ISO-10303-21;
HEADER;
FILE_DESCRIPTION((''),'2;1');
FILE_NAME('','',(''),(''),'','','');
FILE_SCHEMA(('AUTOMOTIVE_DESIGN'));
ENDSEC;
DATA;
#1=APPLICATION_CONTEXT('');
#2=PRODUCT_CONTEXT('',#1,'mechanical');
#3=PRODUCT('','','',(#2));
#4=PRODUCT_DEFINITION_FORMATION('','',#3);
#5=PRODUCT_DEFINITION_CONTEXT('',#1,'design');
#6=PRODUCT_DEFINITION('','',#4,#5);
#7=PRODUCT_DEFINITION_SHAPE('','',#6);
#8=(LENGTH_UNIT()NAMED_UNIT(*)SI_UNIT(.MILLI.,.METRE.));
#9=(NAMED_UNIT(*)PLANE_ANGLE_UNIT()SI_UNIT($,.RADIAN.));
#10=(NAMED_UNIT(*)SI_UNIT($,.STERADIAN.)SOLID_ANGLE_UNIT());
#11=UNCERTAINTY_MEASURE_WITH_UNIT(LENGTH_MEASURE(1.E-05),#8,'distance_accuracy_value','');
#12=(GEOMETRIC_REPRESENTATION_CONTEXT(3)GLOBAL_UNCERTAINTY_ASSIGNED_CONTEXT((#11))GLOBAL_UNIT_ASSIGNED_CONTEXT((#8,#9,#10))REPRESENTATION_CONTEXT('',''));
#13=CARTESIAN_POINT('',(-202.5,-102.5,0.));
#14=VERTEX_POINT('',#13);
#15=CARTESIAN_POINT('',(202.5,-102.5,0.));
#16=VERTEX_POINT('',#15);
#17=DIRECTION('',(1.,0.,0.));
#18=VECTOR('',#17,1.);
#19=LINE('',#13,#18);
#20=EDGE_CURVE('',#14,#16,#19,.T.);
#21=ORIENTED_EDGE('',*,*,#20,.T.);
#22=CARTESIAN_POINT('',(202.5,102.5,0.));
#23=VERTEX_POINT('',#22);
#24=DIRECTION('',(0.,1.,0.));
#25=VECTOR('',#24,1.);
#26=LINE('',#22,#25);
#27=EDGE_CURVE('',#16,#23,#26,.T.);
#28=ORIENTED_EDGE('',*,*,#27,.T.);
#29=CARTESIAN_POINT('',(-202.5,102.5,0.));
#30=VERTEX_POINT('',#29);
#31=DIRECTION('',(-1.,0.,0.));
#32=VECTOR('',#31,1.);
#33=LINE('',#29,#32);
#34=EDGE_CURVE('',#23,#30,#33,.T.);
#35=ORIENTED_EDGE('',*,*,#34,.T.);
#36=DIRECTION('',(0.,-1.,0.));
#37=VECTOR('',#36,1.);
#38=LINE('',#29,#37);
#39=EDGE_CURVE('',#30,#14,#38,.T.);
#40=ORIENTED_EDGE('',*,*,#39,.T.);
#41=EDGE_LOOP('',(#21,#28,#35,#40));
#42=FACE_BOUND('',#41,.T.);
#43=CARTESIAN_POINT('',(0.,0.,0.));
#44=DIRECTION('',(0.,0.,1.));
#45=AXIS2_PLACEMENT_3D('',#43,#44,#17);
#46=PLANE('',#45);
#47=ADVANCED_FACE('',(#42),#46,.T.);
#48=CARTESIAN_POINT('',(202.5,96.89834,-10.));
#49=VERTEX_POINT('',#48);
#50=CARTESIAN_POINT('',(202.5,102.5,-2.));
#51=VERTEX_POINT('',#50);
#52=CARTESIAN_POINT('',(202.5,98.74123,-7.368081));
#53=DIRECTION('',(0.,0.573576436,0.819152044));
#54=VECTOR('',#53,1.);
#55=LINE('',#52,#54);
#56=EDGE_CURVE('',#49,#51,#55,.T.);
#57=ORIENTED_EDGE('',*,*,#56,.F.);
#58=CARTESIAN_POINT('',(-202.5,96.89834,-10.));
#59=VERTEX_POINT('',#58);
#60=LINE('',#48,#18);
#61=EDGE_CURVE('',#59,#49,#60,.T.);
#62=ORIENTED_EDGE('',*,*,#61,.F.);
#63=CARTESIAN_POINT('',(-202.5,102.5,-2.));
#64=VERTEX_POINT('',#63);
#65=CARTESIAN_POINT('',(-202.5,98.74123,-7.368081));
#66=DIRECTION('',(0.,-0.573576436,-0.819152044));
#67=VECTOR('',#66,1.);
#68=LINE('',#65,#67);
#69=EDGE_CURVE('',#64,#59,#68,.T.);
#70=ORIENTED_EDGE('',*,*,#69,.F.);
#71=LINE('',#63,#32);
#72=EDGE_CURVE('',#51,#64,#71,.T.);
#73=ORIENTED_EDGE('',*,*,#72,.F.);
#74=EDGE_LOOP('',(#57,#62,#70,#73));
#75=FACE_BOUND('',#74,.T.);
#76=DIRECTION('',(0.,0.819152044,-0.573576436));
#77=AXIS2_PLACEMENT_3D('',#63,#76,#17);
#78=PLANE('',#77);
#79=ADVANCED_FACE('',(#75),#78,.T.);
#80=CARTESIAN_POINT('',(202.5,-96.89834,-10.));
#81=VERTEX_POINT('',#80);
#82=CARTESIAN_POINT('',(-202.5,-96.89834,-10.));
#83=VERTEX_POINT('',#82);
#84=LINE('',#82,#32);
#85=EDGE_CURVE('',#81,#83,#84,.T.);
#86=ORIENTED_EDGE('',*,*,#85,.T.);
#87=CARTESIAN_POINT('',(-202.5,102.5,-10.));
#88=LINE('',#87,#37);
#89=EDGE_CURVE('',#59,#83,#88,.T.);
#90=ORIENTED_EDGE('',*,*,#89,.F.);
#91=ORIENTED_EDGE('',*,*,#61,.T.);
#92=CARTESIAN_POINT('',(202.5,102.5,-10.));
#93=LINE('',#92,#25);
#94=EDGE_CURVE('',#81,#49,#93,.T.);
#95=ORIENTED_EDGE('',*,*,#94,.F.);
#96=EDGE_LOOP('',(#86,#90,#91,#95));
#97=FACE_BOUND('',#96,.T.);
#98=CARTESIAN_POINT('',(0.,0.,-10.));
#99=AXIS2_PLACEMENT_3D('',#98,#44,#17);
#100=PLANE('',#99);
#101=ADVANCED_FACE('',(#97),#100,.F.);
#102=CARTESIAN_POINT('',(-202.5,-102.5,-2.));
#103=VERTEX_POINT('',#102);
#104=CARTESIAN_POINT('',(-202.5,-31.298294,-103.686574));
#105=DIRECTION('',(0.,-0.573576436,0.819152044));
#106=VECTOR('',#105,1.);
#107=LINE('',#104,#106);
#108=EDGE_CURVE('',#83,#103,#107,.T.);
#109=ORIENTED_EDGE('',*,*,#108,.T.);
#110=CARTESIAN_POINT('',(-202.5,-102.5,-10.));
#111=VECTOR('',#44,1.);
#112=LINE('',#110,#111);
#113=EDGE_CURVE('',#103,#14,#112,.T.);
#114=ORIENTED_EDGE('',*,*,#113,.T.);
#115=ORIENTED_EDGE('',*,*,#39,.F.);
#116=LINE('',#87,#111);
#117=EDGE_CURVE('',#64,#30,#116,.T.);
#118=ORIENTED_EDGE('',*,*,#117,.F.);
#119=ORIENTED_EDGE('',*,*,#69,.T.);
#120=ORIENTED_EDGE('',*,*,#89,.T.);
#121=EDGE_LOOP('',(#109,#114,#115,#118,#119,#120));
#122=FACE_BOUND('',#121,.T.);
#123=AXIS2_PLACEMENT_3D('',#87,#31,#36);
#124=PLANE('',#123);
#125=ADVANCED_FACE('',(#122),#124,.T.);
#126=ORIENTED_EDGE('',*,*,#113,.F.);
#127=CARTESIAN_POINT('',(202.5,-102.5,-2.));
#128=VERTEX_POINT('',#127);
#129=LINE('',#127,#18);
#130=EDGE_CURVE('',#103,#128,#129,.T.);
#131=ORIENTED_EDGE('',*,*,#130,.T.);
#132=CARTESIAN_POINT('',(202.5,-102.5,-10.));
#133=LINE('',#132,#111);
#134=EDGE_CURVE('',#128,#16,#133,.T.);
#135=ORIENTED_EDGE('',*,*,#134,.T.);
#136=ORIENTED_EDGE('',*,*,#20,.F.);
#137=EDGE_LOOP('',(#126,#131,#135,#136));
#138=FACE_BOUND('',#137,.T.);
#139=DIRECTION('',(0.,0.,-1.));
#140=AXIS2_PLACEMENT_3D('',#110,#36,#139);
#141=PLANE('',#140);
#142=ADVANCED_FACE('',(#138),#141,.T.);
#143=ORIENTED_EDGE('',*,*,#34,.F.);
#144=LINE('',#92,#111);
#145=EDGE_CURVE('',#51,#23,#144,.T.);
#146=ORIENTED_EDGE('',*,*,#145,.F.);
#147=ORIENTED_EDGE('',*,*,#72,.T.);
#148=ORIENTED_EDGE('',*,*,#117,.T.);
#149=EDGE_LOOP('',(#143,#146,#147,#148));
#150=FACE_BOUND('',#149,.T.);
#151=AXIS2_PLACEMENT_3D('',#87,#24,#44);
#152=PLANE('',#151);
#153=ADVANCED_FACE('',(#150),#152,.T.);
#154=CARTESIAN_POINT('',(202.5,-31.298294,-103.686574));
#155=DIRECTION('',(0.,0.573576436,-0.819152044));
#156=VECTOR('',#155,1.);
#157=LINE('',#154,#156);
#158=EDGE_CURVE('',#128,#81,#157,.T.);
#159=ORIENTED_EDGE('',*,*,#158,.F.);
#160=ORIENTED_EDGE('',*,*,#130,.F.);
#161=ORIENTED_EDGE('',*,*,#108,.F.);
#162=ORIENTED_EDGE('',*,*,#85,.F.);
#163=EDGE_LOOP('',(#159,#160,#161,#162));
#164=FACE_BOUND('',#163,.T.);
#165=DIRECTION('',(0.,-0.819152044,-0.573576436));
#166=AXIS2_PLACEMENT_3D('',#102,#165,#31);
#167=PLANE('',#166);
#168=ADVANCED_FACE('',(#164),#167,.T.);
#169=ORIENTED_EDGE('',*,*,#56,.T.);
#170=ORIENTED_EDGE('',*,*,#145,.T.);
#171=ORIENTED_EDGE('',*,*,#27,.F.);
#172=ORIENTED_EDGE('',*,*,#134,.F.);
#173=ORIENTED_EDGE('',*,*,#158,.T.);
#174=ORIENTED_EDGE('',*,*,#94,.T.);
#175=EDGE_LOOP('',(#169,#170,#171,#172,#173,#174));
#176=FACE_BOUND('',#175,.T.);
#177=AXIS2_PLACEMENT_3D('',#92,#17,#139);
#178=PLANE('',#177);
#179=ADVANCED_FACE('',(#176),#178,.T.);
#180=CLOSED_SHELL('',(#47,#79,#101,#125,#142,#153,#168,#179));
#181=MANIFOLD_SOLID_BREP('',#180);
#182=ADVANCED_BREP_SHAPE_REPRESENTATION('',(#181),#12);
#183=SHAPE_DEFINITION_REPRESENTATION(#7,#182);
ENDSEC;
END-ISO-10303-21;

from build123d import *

# Parameters (mm, degrees)
SKETCH_1_W             = 405
SKETCH_1_H             = 205
SM_BASE_FLANGE_1_DEPTH = 10
CHAMFER_1_SIZE         = 8
CHAMFER_1_SIZE2        = 5.601660306
CHAMFER_2_SIZE         = 8
CHAMFER_2_SIZE2        = 5.601660306


# Sheet-metal steps are written as plain solids
with BuildPart() as part:
    # Sketch 1 → 基体-法兰1 (new body)
    with BuildSketch(Plane.XY):
        Rectangle(SKETCH_1_W, SKETCH_1_H)
    extrude(amount=-SM_BASE_FLANGE_1_DEPTH)

    # 倒角1
    chamfer_1_edges = [part.edges().sort_by_distance(p)[0] for p in [
        (0, 102.5, -10),
    ]]
    chamfer_1_side = [part.faces().sort_by_distance(p)[0] for p in [
        (0, 102.5, -5),
    ]]
    chamfer(chamfer_1_edges, length=CHAMFER_1_SIZE, length2=CHAMFER_1_SIZE2, reference=chamfer_1_side[0])

    # 倒角2
    chamfer_2_edges = [part.edges().sort_by_distance(p)[0] for p in [
        (0, -102.5, -10),
    ]]
    chamfer_2_side = [part.faces().sort_by_distance(p)[0] for p in [
        (0, -102.5, -5),
    ]]
    chamfer(chamfer_2_edges, length=CHAMFER_2_SIZE, length2=CHAMFER_2_SIZE2, reference=chamfer_2_side[0])


solid = part.part
